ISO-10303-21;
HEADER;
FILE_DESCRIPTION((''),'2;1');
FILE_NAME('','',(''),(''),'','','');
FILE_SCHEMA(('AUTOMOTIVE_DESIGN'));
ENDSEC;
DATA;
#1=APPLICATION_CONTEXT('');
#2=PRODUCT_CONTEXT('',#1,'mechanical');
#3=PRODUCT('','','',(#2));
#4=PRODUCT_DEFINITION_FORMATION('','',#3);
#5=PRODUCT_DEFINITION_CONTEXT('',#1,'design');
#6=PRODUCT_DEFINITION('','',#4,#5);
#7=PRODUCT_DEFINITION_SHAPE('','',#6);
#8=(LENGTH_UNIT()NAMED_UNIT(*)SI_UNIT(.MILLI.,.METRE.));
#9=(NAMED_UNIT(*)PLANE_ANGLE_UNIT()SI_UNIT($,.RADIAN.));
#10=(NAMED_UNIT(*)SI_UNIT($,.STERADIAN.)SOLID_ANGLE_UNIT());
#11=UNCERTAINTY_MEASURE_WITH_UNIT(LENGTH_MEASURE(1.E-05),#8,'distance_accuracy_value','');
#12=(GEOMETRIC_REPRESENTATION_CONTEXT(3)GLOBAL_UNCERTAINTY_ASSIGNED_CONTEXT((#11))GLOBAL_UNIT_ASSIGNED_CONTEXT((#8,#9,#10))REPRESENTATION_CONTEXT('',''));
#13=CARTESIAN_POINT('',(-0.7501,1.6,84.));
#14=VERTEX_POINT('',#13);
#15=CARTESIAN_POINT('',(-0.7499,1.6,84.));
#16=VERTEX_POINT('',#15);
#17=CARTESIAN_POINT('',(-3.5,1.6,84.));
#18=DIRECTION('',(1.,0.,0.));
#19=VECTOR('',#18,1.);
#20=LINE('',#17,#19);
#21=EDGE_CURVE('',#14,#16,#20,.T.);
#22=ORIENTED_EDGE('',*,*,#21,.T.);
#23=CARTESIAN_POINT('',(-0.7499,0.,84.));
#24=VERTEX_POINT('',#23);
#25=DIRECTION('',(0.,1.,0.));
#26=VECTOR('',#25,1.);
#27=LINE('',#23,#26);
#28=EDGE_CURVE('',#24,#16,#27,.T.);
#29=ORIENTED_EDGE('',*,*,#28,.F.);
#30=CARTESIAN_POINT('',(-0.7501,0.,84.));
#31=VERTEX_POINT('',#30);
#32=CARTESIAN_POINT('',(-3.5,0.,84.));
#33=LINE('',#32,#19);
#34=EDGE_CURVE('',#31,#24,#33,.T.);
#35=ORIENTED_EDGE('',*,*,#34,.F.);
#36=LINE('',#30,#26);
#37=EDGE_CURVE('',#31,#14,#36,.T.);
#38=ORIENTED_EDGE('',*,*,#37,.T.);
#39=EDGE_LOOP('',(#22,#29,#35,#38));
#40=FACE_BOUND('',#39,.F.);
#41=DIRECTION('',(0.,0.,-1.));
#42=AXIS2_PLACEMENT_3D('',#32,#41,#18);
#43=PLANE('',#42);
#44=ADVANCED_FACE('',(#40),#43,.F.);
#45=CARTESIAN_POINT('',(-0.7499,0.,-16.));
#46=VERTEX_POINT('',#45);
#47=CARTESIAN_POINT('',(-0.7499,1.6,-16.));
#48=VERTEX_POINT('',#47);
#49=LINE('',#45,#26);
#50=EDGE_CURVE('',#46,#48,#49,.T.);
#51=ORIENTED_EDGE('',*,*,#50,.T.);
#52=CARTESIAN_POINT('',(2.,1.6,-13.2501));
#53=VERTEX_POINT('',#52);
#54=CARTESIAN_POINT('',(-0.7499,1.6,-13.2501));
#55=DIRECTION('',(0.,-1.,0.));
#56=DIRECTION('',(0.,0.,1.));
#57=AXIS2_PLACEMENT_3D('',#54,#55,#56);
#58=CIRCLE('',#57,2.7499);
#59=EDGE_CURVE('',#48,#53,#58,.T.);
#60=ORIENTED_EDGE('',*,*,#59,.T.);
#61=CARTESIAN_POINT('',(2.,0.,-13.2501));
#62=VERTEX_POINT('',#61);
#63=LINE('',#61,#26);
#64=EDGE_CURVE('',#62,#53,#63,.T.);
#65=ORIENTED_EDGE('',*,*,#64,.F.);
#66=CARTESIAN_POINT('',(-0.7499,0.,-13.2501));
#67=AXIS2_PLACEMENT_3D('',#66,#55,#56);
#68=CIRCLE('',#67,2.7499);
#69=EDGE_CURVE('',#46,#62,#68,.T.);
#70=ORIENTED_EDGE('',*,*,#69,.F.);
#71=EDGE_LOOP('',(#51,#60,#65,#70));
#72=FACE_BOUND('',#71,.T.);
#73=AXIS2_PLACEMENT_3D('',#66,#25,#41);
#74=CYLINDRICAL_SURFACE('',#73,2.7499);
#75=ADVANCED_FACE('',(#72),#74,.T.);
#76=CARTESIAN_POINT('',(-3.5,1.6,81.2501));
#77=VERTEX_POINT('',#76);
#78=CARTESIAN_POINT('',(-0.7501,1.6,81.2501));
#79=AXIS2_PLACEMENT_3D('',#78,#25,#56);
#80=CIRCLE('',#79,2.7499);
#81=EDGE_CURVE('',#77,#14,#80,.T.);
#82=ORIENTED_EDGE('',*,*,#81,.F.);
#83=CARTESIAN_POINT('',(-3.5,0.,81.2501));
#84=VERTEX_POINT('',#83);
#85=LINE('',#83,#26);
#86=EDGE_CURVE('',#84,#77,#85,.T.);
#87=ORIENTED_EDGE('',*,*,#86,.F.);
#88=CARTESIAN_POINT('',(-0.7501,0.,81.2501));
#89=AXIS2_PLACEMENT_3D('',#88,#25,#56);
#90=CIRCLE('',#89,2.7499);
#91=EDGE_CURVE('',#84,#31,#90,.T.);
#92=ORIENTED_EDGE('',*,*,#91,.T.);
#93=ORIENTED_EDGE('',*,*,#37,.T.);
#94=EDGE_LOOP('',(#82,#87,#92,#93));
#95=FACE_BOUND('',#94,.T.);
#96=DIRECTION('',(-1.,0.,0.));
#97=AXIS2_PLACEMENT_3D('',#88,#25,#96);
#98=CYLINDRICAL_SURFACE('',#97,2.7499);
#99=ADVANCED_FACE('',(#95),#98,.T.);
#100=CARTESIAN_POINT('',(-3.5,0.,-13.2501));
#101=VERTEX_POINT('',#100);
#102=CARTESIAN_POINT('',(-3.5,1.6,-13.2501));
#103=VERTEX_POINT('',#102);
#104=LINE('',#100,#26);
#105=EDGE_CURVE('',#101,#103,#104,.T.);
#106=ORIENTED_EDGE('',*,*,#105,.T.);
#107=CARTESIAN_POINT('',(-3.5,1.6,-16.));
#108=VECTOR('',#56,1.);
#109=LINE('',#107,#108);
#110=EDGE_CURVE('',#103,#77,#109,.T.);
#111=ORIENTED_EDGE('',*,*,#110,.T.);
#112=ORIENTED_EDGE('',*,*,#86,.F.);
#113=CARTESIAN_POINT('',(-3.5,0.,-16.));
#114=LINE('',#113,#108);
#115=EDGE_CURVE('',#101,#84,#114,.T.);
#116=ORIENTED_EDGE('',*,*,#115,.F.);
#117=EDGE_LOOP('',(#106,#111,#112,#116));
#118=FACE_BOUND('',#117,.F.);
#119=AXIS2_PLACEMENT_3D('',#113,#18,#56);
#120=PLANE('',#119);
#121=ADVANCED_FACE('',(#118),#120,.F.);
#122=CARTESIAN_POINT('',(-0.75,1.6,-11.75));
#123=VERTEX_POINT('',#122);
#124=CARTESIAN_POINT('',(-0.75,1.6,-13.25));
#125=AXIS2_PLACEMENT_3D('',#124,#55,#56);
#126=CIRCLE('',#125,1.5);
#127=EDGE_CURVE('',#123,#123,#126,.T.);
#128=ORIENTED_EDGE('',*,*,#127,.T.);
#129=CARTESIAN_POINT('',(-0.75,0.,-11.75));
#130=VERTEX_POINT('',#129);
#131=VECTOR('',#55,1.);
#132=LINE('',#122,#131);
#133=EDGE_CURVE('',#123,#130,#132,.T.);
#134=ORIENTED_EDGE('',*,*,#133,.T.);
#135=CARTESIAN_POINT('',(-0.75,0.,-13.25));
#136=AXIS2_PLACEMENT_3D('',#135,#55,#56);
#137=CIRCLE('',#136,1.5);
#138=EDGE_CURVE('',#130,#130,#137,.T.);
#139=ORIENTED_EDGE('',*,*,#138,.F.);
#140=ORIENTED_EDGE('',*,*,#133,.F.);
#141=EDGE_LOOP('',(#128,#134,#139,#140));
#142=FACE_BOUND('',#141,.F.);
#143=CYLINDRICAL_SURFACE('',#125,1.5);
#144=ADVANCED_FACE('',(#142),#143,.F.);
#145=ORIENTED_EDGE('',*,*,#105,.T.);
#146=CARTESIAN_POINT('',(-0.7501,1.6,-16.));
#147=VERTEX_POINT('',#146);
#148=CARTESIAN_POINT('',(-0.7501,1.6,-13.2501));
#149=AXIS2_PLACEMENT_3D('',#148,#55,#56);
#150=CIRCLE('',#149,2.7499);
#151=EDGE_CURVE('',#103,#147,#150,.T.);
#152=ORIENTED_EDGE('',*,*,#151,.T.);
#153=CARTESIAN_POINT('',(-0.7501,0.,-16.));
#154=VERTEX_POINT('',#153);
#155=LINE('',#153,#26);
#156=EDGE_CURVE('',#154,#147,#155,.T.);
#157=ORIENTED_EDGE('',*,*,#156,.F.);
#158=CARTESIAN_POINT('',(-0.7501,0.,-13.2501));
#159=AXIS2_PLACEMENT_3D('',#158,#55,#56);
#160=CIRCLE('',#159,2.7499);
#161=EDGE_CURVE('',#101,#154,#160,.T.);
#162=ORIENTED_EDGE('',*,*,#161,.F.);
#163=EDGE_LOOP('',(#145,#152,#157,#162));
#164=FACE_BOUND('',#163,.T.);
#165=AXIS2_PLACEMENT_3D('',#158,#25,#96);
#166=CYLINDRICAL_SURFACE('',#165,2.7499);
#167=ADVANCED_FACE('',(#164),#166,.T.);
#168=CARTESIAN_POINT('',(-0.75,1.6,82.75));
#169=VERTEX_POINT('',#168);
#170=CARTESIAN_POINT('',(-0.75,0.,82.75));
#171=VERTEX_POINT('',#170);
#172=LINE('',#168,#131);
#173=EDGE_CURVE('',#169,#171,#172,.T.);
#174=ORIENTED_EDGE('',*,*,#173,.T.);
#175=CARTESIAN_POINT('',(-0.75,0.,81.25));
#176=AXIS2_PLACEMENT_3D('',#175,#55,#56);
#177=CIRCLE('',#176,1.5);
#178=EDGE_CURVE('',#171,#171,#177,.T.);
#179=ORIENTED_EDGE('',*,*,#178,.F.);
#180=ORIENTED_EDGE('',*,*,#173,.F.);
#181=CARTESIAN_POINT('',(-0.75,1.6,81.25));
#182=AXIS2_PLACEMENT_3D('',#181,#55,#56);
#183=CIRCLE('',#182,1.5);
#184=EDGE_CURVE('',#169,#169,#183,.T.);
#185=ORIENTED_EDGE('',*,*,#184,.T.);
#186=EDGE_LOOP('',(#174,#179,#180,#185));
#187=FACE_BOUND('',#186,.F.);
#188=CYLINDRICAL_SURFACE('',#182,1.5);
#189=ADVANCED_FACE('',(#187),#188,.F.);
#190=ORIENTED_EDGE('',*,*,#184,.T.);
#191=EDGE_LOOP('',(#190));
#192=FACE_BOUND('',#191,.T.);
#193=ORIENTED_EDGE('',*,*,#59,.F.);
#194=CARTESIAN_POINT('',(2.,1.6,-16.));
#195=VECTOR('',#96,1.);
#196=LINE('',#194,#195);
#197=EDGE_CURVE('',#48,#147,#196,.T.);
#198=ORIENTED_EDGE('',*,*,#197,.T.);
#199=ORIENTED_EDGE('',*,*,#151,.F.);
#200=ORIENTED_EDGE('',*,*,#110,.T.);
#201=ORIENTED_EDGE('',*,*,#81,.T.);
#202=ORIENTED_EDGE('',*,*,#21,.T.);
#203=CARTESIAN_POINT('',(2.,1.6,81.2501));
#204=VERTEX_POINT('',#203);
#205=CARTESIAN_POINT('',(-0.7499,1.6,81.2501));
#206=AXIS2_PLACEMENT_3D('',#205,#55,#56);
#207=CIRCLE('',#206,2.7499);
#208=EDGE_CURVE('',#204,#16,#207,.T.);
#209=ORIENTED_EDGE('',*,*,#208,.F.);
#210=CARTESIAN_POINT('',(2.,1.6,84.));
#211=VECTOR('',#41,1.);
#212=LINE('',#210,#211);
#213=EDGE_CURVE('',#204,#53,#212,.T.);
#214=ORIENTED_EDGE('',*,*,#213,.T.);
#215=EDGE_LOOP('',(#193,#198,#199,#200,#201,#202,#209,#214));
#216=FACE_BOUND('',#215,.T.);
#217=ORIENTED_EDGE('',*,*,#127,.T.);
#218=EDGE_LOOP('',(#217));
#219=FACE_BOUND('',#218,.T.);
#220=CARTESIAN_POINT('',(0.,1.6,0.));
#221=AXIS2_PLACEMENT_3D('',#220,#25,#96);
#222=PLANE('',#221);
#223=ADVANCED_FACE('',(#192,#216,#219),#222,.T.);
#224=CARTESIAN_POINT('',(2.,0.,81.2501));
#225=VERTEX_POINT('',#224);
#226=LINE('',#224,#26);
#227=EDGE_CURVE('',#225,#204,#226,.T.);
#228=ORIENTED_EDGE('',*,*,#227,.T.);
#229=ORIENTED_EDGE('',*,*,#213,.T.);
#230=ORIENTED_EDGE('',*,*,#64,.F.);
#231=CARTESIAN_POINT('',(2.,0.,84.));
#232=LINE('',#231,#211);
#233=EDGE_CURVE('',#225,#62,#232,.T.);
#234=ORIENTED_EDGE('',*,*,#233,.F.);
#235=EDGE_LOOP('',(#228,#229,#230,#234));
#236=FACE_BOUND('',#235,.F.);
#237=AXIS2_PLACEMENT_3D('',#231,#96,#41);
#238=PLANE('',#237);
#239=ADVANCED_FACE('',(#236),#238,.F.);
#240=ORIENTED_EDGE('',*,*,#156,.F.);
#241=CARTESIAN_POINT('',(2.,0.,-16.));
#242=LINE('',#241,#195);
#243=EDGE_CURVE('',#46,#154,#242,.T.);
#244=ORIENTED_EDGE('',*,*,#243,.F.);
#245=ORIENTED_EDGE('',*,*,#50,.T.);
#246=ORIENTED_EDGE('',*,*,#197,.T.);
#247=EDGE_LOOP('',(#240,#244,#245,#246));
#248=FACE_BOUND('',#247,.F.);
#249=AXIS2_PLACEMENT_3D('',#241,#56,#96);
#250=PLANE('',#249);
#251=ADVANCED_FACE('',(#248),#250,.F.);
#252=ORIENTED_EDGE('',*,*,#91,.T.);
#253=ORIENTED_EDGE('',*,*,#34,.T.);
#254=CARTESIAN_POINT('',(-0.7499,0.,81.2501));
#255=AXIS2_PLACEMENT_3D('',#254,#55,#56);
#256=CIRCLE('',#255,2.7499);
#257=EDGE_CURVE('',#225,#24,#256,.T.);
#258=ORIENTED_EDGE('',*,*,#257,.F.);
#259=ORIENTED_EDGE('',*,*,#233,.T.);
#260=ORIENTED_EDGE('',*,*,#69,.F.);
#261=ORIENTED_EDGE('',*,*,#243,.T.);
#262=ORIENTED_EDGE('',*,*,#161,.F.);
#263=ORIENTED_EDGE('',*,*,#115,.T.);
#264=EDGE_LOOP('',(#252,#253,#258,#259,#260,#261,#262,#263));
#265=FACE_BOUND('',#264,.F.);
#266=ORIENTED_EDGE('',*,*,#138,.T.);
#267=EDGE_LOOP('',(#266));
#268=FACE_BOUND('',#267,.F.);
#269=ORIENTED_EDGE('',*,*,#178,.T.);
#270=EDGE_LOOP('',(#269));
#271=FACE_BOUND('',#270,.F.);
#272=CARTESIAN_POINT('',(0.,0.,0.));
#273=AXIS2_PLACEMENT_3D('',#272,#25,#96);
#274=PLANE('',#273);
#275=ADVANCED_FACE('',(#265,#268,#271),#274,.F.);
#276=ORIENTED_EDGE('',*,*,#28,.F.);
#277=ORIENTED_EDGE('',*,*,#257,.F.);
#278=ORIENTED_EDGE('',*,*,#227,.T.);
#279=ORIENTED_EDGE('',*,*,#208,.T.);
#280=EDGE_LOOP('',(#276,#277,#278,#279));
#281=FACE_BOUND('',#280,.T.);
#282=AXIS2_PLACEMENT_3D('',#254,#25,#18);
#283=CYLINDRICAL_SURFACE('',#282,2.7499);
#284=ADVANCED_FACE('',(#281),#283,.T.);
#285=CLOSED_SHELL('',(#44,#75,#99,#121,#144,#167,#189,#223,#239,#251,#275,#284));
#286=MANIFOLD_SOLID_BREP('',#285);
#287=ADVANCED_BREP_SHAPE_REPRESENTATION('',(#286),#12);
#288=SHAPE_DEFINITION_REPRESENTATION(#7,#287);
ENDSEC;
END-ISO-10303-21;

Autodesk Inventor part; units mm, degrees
ref_plane "YZ Plane" through (0, 0, 0) normal (1, 0, 0) x (0, 1, 0)
ref_plane "XZ Plane" through (0, 0, 0) normal (0, 1, 0) x (-1, 0, 0)
ref_plane "XY Plane" through (0, 0, 0) normal (0, 0, 1) x (1, 0, 0)
sketch "Szkic1" plane through (0, 0, 0) normal (0, 1, 0) x (-1, 0, 0)
  line L0 (3.5, 84) -> (-2, 84)
  line L1 (-2, 84) -> (-2, -16)
  line L2 (-2, -16) -> (3.5, -16)
  line L3 (3.5, -16) -> (3.5, 84)
  point P0 (0, 0)
  dimension "d0" = 5.5
  dimension "d1" = 100
extrude "Wyciągnięcie proste1" add sketch "Szkic1" along normal blind 1.6
fillet "Zaokrąglenie1" radius 2.75 4 edges at (-3.5, 0.8, -16) (2, 0.8, -16) (-3.5, 0.8, 84) (2, 0.8, 84)
sketch "Szkic2" plane through (0, 1.6, 0) normal (0, 1, 0) x (1, 0, 0)
  arc A0 (-3.5, -81.25) -> (2, -81.25) centre (-0.75, -81.25) ccw projected
  line L0 (2, -81.25) -> (2, 13.25) projected
  arc A1 (2, 13.25) -> (-3.5, 13.25) centre (-0.75, 13.25) ccw projected
  line L1 (-3.5, 13.25) -> (-3.5, -81.25) projected
  point P0 (0, 0)
hole "Otwór1" at (-0.75, 1.6, 81.25) at (-0.75, 1.6, -13.25) direction (0, -1, 0) diameter 3 end through all
properties part number "belka"
